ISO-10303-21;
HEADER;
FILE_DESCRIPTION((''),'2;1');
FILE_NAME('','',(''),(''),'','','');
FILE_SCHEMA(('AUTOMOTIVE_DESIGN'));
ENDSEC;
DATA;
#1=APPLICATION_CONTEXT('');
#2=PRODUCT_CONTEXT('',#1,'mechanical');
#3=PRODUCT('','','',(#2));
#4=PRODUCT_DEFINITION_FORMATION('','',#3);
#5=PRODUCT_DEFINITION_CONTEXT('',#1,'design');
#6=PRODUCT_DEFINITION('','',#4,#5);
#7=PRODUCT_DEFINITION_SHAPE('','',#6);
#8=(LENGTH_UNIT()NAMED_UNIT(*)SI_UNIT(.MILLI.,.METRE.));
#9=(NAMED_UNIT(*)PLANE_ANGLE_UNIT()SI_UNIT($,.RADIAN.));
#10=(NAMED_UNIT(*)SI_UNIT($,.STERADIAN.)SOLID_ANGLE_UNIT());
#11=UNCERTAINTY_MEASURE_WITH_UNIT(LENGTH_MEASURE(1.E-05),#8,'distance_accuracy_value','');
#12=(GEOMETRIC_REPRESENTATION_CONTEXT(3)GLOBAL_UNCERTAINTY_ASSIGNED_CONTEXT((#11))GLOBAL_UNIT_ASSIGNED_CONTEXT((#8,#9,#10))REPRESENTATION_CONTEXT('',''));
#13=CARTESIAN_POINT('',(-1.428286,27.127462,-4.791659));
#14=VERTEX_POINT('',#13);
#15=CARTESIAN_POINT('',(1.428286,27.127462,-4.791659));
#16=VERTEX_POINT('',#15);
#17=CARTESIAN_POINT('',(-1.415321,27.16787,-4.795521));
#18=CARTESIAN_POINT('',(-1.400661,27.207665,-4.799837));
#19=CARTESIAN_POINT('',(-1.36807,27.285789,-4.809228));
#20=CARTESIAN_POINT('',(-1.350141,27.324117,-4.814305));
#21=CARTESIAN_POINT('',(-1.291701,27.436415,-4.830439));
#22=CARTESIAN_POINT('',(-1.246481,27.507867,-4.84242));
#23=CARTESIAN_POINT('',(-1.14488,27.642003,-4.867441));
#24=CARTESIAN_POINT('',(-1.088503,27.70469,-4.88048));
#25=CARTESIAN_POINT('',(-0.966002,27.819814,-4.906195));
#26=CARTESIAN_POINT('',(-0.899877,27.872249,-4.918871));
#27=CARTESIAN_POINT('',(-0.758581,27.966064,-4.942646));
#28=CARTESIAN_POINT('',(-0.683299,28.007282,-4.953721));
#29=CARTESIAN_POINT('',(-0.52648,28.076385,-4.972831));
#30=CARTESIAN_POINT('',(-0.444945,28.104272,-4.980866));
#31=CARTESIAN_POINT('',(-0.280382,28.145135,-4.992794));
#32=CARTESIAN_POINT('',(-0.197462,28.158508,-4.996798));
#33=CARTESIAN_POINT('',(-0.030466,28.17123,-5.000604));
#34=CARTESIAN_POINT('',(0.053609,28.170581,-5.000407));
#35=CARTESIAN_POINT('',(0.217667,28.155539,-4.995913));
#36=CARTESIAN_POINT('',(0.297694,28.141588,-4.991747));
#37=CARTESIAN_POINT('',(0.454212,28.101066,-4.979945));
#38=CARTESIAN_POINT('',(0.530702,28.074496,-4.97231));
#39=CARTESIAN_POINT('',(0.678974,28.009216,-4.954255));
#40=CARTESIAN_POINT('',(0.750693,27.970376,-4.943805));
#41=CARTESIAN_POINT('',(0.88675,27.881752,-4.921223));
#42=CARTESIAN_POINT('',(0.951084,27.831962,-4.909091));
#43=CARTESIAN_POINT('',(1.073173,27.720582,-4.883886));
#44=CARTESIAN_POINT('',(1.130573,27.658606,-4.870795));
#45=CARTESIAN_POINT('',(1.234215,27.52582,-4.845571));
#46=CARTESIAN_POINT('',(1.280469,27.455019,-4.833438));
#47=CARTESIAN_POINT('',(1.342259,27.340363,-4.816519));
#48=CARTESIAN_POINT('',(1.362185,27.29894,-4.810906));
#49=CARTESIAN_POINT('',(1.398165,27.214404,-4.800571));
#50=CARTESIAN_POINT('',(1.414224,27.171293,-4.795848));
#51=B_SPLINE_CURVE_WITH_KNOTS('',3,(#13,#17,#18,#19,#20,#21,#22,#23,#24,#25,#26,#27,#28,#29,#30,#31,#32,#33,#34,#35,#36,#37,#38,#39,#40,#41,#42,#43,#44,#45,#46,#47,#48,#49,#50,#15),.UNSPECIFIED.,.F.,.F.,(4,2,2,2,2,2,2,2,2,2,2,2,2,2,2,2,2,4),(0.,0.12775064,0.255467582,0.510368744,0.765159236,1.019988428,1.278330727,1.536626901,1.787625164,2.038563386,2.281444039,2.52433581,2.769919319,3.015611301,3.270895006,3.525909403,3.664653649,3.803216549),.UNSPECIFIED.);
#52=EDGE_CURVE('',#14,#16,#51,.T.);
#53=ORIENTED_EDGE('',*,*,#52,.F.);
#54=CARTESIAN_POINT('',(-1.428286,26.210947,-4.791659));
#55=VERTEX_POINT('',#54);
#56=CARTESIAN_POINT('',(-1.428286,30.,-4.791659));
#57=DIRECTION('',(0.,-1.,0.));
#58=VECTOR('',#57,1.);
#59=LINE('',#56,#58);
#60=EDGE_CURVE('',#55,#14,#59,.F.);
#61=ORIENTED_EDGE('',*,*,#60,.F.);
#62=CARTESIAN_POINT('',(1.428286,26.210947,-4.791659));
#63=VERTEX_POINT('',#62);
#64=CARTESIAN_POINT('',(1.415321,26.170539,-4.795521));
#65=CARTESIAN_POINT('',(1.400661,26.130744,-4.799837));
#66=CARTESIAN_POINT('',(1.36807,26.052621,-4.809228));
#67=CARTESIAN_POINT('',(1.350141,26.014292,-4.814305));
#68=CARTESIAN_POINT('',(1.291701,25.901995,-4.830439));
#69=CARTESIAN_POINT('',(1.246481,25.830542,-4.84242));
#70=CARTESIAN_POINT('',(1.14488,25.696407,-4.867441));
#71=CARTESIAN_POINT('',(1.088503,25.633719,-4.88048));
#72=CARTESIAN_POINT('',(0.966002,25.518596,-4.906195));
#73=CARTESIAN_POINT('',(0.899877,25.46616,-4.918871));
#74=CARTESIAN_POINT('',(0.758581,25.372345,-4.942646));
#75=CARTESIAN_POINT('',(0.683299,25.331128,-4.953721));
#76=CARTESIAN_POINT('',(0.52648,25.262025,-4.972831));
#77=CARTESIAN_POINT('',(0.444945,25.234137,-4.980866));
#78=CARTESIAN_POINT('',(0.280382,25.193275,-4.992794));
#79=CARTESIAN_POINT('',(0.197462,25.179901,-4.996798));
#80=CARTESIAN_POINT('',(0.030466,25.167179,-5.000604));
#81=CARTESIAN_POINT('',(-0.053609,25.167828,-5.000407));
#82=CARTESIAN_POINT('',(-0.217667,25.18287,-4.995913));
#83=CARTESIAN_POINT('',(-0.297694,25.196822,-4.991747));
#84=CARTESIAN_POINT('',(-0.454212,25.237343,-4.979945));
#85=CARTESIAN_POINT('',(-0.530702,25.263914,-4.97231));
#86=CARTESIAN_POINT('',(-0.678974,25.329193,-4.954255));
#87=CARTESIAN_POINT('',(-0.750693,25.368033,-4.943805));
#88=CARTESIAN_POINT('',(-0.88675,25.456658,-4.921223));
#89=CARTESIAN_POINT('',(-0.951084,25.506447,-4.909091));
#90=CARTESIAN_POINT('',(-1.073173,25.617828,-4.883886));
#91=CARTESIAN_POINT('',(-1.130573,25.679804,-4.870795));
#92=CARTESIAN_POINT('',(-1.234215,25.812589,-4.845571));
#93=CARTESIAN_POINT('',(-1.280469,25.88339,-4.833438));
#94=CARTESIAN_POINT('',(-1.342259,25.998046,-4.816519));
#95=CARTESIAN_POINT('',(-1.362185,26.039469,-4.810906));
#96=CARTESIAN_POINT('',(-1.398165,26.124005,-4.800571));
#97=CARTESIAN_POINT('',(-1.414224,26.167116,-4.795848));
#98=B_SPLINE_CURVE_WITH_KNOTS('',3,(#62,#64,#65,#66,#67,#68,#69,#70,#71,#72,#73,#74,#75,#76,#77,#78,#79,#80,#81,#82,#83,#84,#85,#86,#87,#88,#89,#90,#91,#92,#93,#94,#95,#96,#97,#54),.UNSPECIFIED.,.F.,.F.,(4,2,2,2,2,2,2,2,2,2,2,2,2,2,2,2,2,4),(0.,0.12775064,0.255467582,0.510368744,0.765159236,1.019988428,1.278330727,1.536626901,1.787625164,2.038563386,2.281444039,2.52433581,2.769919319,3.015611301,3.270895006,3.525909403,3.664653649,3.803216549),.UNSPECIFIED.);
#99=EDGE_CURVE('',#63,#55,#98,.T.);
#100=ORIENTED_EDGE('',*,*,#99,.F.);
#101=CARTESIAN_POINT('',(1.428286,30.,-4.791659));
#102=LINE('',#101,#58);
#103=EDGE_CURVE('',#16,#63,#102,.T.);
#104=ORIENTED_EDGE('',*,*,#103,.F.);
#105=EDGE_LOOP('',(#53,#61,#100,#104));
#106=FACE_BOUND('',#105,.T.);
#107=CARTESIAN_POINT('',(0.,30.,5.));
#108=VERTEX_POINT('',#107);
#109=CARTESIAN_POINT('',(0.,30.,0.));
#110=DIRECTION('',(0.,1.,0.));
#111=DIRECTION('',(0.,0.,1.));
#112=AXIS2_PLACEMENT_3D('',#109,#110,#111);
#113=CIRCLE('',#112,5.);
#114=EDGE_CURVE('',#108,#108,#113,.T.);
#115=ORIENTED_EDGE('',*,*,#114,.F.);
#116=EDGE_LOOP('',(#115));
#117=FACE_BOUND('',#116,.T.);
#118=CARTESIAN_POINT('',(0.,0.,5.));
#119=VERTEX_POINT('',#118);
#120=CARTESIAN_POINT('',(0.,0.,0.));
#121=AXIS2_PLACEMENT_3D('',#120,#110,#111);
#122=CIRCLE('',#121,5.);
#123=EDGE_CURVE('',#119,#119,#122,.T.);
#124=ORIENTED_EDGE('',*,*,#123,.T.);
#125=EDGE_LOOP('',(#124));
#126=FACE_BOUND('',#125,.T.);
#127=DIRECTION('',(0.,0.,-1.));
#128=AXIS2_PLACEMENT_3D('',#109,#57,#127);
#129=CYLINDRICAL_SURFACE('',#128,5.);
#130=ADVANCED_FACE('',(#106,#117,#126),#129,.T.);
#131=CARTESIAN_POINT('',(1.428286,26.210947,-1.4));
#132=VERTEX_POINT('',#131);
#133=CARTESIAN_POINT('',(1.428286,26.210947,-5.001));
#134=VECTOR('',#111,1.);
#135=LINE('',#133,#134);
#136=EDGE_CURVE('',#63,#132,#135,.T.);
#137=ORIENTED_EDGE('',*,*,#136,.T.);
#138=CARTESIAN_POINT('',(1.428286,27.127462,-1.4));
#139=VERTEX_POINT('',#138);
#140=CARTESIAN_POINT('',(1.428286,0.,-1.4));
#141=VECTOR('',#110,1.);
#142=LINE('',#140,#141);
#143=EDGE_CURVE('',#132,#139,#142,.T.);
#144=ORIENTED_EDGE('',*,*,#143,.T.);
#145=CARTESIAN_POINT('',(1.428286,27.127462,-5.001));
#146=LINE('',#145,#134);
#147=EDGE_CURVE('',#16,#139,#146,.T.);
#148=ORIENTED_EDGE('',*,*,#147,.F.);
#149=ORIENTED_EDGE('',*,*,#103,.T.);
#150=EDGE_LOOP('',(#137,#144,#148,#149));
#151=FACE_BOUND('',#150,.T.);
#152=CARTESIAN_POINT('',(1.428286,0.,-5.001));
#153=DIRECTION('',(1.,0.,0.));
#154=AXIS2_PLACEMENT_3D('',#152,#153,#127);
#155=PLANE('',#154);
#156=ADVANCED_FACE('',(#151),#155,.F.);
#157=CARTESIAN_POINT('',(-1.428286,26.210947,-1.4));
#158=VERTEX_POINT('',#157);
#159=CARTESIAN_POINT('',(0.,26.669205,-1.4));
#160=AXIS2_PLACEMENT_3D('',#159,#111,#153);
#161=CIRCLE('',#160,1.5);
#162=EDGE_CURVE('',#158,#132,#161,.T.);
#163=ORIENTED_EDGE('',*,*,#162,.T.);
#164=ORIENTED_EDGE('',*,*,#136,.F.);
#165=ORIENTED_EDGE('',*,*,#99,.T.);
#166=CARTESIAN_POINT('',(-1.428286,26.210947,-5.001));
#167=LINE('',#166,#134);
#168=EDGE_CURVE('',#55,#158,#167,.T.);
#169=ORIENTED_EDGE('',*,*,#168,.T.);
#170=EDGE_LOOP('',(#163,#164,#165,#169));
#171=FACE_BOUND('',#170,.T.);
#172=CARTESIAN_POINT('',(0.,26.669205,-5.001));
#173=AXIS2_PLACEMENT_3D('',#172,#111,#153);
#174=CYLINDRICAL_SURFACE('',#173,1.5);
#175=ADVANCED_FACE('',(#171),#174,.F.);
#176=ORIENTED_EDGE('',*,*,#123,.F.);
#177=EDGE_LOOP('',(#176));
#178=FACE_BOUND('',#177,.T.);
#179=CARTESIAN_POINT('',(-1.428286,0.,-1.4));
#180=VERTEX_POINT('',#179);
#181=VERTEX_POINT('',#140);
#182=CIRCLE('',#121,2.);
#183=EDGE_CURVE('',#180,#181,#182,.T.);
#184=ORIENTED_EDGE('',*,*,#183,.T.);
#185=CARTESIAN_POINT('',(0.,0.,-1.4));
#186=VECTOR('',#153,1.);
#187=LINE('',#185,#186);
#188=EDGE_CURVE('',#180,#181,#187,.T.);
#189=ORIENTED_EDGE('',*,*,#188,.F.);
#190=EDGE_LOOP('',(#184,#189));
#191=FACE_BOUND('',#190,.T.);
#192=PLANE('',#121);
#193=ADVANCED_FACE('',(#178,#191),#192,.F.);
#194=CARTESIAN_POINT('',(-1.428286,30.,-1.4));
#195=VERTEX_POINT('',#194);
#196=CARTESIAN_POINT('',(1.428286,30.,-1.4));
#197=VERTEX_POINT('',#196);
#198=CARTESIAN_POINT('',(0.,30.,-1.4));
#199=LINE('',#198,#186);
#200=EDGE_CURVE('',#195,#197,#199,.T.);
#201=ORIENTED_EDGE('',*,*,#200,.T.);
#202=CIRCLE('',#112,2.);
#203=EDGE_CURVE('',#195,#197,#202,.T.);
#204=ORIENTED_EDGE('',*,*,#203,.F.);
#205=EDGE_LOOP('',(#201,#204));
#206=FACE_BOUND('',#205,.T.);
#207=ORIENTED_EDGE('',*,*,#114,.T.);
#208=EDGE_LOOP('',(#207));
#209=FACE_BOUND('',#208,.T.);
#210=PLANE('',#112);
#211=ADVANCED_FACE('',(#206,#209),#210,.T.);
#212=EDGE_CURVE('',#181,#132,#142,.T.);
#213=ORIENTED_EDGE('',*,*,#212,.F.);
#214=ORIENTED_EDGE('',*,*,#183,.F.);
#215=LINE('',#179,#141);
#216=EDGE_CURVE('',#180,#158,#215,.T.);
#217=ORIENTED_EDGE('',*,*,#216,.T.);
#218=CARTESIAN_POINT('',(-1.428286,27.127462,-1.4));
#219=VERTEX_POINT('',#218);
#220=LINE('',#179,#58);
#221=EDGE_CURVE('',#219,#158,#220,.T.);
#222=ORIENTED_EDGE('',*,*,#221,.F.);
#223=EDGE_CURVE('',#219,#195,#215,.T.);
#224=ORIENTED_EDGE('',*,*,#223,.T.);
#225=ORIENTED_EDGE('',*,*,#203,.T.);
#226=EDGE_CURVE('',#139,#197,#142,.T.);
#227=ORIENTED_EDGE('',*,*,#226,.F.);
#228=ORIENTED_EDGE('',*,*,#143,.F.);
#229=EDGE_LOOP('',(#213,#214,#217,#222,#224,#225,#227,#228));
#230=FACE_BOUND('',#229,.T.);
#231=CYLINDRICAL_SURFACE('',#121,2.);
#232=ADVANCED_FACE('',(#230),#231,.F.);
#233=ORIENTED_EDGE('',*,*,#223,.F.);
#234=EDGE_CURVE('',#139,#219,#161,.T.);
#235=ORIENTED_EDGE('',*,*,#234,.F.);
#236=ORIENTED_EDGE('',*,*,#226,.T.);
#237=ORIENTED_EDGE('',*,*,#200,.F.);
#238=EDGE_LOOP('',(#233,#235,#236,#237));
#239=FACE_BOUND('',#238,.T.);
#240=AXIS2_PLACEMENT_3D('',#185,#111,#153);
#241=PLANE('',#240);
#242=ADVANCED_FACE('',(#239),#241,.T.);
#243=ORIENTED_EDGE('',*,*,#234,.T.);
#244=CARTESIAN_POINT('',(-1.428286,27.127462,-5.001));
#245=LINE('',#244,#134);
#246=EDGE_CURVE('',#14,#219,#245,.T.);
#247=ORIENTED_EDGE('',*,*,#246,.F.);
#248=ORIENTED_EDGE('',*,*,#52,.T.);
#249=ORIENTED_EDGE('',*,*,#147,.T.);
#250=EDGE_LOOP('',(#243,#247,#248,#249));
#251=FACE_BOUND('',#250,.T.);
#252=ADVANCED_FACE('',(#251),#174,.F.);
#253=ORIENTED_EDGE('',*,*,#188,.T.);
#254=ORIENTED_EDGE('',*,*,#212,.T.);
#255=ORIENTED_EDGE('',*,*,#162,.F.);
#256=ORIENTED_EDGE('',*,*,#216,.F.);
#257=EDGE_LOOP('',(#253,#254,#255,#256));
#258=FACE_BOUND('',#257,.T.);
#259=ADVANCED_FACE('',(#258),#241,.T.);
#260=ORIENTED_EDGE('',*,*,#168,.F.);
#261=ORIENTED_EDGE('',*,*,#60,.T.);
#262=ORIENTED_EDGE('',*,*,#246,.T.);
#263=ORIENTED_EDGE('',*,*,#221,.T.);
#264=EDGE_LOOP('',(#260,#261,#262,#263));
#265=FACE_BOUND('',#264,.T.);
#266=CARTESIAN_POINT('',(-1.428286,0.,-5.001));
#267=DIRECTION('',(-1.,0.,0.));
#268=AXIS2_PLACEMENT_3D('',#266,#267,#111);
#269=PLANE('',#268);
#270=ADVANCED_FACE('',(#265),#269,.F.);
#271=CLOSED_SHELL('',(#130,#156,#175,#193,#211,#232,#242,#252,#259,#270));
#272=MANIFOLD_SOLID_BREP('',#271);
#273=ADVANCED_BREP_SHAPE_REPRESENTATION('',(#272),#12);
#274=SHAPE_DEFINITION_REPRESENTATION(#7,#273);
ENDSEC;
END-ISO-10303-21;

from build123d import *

# Parameters (mm, degrees)
SKETCH_2_R          = 5
EXTRUDE_2_DEPTH     = 30
CUT_EXTRUDE_1_DEPTH = 31.822070015
CUT_EXTRUDE_2_REACH = 33.08


with BuildPart() as part:
    # 草图2 → 凸台-拉伸2 (new body)
    with BuildSketch(Plane(origin=(0, 0, 0), x_dir=(1, 0, 0), z_dir=(0, 1, 0))):
        Circle(SKETCH_2_R)
    extrude(amount=EXTRUDE_2_DEPTH)

    # 草图4 → 切除-拉伸1 (cut, through all)
    with BuildSketch(Plane(origin=(0, 30, 0), x_dir=(1, 0, 0), z_dir=(0, 1, 0))):
        with BuildLine():
            Line((0, 1.4), (-1.428285686, 1.4))
            ThreePointArc((-1.428285686, 1.4), (-0.756117924, -1.851563039), (2, 0))
            ThreePointArc((2, 0), (1.851563039, 0.756117924), (1.428285686, 1.4))
            Line((1.428285686, 1.4), (0, 1.4))
        make_face()
    extrude(amount=-CUT_EXTRUDE_1_DEPTH, mode=Mode.SUBTRACT)

    # 草图5 → 切除-拉伸2 (cut, up to next)
    with BuildSketch(Plane.XY.offset(-1.4), mode=Mode.PRIVATE) as cut_extrude_2_sk1:
        with BuildLine():
            Line((1.428285686, 26.210947143), (1.428285686, 27.127462282))
            ThreePointArc((1.428285686, 27.127462282), (0.88391562, 27.881101233), (0, 28.169204712))
            ThreePointArc((0, 28.169204712), (-0.88391562, 27.881101233), (-1.428285686, 27.127462282))
            Line((-1.428285686, 27.127462282), (-1.428285686, 26.210947143))
            ThreePointArc((-1.428285686, 26.210947143), (0, 25.169204712), (1.428285686, 26.210947143))
        make_face()
    cut_extrude_2_tool1 = extrude(cut_extrude_2_sk1.sketch, amount=-CUT_EXTRUDE_2_REACH, mode=Mode.PRIVATE) & part.part
    add(cut_extrude_2_tool1.solids().sort_by_distance((0, 26.669205, -1.4))[0], mode=Mode.SUBTRACT)


solid = part.part
